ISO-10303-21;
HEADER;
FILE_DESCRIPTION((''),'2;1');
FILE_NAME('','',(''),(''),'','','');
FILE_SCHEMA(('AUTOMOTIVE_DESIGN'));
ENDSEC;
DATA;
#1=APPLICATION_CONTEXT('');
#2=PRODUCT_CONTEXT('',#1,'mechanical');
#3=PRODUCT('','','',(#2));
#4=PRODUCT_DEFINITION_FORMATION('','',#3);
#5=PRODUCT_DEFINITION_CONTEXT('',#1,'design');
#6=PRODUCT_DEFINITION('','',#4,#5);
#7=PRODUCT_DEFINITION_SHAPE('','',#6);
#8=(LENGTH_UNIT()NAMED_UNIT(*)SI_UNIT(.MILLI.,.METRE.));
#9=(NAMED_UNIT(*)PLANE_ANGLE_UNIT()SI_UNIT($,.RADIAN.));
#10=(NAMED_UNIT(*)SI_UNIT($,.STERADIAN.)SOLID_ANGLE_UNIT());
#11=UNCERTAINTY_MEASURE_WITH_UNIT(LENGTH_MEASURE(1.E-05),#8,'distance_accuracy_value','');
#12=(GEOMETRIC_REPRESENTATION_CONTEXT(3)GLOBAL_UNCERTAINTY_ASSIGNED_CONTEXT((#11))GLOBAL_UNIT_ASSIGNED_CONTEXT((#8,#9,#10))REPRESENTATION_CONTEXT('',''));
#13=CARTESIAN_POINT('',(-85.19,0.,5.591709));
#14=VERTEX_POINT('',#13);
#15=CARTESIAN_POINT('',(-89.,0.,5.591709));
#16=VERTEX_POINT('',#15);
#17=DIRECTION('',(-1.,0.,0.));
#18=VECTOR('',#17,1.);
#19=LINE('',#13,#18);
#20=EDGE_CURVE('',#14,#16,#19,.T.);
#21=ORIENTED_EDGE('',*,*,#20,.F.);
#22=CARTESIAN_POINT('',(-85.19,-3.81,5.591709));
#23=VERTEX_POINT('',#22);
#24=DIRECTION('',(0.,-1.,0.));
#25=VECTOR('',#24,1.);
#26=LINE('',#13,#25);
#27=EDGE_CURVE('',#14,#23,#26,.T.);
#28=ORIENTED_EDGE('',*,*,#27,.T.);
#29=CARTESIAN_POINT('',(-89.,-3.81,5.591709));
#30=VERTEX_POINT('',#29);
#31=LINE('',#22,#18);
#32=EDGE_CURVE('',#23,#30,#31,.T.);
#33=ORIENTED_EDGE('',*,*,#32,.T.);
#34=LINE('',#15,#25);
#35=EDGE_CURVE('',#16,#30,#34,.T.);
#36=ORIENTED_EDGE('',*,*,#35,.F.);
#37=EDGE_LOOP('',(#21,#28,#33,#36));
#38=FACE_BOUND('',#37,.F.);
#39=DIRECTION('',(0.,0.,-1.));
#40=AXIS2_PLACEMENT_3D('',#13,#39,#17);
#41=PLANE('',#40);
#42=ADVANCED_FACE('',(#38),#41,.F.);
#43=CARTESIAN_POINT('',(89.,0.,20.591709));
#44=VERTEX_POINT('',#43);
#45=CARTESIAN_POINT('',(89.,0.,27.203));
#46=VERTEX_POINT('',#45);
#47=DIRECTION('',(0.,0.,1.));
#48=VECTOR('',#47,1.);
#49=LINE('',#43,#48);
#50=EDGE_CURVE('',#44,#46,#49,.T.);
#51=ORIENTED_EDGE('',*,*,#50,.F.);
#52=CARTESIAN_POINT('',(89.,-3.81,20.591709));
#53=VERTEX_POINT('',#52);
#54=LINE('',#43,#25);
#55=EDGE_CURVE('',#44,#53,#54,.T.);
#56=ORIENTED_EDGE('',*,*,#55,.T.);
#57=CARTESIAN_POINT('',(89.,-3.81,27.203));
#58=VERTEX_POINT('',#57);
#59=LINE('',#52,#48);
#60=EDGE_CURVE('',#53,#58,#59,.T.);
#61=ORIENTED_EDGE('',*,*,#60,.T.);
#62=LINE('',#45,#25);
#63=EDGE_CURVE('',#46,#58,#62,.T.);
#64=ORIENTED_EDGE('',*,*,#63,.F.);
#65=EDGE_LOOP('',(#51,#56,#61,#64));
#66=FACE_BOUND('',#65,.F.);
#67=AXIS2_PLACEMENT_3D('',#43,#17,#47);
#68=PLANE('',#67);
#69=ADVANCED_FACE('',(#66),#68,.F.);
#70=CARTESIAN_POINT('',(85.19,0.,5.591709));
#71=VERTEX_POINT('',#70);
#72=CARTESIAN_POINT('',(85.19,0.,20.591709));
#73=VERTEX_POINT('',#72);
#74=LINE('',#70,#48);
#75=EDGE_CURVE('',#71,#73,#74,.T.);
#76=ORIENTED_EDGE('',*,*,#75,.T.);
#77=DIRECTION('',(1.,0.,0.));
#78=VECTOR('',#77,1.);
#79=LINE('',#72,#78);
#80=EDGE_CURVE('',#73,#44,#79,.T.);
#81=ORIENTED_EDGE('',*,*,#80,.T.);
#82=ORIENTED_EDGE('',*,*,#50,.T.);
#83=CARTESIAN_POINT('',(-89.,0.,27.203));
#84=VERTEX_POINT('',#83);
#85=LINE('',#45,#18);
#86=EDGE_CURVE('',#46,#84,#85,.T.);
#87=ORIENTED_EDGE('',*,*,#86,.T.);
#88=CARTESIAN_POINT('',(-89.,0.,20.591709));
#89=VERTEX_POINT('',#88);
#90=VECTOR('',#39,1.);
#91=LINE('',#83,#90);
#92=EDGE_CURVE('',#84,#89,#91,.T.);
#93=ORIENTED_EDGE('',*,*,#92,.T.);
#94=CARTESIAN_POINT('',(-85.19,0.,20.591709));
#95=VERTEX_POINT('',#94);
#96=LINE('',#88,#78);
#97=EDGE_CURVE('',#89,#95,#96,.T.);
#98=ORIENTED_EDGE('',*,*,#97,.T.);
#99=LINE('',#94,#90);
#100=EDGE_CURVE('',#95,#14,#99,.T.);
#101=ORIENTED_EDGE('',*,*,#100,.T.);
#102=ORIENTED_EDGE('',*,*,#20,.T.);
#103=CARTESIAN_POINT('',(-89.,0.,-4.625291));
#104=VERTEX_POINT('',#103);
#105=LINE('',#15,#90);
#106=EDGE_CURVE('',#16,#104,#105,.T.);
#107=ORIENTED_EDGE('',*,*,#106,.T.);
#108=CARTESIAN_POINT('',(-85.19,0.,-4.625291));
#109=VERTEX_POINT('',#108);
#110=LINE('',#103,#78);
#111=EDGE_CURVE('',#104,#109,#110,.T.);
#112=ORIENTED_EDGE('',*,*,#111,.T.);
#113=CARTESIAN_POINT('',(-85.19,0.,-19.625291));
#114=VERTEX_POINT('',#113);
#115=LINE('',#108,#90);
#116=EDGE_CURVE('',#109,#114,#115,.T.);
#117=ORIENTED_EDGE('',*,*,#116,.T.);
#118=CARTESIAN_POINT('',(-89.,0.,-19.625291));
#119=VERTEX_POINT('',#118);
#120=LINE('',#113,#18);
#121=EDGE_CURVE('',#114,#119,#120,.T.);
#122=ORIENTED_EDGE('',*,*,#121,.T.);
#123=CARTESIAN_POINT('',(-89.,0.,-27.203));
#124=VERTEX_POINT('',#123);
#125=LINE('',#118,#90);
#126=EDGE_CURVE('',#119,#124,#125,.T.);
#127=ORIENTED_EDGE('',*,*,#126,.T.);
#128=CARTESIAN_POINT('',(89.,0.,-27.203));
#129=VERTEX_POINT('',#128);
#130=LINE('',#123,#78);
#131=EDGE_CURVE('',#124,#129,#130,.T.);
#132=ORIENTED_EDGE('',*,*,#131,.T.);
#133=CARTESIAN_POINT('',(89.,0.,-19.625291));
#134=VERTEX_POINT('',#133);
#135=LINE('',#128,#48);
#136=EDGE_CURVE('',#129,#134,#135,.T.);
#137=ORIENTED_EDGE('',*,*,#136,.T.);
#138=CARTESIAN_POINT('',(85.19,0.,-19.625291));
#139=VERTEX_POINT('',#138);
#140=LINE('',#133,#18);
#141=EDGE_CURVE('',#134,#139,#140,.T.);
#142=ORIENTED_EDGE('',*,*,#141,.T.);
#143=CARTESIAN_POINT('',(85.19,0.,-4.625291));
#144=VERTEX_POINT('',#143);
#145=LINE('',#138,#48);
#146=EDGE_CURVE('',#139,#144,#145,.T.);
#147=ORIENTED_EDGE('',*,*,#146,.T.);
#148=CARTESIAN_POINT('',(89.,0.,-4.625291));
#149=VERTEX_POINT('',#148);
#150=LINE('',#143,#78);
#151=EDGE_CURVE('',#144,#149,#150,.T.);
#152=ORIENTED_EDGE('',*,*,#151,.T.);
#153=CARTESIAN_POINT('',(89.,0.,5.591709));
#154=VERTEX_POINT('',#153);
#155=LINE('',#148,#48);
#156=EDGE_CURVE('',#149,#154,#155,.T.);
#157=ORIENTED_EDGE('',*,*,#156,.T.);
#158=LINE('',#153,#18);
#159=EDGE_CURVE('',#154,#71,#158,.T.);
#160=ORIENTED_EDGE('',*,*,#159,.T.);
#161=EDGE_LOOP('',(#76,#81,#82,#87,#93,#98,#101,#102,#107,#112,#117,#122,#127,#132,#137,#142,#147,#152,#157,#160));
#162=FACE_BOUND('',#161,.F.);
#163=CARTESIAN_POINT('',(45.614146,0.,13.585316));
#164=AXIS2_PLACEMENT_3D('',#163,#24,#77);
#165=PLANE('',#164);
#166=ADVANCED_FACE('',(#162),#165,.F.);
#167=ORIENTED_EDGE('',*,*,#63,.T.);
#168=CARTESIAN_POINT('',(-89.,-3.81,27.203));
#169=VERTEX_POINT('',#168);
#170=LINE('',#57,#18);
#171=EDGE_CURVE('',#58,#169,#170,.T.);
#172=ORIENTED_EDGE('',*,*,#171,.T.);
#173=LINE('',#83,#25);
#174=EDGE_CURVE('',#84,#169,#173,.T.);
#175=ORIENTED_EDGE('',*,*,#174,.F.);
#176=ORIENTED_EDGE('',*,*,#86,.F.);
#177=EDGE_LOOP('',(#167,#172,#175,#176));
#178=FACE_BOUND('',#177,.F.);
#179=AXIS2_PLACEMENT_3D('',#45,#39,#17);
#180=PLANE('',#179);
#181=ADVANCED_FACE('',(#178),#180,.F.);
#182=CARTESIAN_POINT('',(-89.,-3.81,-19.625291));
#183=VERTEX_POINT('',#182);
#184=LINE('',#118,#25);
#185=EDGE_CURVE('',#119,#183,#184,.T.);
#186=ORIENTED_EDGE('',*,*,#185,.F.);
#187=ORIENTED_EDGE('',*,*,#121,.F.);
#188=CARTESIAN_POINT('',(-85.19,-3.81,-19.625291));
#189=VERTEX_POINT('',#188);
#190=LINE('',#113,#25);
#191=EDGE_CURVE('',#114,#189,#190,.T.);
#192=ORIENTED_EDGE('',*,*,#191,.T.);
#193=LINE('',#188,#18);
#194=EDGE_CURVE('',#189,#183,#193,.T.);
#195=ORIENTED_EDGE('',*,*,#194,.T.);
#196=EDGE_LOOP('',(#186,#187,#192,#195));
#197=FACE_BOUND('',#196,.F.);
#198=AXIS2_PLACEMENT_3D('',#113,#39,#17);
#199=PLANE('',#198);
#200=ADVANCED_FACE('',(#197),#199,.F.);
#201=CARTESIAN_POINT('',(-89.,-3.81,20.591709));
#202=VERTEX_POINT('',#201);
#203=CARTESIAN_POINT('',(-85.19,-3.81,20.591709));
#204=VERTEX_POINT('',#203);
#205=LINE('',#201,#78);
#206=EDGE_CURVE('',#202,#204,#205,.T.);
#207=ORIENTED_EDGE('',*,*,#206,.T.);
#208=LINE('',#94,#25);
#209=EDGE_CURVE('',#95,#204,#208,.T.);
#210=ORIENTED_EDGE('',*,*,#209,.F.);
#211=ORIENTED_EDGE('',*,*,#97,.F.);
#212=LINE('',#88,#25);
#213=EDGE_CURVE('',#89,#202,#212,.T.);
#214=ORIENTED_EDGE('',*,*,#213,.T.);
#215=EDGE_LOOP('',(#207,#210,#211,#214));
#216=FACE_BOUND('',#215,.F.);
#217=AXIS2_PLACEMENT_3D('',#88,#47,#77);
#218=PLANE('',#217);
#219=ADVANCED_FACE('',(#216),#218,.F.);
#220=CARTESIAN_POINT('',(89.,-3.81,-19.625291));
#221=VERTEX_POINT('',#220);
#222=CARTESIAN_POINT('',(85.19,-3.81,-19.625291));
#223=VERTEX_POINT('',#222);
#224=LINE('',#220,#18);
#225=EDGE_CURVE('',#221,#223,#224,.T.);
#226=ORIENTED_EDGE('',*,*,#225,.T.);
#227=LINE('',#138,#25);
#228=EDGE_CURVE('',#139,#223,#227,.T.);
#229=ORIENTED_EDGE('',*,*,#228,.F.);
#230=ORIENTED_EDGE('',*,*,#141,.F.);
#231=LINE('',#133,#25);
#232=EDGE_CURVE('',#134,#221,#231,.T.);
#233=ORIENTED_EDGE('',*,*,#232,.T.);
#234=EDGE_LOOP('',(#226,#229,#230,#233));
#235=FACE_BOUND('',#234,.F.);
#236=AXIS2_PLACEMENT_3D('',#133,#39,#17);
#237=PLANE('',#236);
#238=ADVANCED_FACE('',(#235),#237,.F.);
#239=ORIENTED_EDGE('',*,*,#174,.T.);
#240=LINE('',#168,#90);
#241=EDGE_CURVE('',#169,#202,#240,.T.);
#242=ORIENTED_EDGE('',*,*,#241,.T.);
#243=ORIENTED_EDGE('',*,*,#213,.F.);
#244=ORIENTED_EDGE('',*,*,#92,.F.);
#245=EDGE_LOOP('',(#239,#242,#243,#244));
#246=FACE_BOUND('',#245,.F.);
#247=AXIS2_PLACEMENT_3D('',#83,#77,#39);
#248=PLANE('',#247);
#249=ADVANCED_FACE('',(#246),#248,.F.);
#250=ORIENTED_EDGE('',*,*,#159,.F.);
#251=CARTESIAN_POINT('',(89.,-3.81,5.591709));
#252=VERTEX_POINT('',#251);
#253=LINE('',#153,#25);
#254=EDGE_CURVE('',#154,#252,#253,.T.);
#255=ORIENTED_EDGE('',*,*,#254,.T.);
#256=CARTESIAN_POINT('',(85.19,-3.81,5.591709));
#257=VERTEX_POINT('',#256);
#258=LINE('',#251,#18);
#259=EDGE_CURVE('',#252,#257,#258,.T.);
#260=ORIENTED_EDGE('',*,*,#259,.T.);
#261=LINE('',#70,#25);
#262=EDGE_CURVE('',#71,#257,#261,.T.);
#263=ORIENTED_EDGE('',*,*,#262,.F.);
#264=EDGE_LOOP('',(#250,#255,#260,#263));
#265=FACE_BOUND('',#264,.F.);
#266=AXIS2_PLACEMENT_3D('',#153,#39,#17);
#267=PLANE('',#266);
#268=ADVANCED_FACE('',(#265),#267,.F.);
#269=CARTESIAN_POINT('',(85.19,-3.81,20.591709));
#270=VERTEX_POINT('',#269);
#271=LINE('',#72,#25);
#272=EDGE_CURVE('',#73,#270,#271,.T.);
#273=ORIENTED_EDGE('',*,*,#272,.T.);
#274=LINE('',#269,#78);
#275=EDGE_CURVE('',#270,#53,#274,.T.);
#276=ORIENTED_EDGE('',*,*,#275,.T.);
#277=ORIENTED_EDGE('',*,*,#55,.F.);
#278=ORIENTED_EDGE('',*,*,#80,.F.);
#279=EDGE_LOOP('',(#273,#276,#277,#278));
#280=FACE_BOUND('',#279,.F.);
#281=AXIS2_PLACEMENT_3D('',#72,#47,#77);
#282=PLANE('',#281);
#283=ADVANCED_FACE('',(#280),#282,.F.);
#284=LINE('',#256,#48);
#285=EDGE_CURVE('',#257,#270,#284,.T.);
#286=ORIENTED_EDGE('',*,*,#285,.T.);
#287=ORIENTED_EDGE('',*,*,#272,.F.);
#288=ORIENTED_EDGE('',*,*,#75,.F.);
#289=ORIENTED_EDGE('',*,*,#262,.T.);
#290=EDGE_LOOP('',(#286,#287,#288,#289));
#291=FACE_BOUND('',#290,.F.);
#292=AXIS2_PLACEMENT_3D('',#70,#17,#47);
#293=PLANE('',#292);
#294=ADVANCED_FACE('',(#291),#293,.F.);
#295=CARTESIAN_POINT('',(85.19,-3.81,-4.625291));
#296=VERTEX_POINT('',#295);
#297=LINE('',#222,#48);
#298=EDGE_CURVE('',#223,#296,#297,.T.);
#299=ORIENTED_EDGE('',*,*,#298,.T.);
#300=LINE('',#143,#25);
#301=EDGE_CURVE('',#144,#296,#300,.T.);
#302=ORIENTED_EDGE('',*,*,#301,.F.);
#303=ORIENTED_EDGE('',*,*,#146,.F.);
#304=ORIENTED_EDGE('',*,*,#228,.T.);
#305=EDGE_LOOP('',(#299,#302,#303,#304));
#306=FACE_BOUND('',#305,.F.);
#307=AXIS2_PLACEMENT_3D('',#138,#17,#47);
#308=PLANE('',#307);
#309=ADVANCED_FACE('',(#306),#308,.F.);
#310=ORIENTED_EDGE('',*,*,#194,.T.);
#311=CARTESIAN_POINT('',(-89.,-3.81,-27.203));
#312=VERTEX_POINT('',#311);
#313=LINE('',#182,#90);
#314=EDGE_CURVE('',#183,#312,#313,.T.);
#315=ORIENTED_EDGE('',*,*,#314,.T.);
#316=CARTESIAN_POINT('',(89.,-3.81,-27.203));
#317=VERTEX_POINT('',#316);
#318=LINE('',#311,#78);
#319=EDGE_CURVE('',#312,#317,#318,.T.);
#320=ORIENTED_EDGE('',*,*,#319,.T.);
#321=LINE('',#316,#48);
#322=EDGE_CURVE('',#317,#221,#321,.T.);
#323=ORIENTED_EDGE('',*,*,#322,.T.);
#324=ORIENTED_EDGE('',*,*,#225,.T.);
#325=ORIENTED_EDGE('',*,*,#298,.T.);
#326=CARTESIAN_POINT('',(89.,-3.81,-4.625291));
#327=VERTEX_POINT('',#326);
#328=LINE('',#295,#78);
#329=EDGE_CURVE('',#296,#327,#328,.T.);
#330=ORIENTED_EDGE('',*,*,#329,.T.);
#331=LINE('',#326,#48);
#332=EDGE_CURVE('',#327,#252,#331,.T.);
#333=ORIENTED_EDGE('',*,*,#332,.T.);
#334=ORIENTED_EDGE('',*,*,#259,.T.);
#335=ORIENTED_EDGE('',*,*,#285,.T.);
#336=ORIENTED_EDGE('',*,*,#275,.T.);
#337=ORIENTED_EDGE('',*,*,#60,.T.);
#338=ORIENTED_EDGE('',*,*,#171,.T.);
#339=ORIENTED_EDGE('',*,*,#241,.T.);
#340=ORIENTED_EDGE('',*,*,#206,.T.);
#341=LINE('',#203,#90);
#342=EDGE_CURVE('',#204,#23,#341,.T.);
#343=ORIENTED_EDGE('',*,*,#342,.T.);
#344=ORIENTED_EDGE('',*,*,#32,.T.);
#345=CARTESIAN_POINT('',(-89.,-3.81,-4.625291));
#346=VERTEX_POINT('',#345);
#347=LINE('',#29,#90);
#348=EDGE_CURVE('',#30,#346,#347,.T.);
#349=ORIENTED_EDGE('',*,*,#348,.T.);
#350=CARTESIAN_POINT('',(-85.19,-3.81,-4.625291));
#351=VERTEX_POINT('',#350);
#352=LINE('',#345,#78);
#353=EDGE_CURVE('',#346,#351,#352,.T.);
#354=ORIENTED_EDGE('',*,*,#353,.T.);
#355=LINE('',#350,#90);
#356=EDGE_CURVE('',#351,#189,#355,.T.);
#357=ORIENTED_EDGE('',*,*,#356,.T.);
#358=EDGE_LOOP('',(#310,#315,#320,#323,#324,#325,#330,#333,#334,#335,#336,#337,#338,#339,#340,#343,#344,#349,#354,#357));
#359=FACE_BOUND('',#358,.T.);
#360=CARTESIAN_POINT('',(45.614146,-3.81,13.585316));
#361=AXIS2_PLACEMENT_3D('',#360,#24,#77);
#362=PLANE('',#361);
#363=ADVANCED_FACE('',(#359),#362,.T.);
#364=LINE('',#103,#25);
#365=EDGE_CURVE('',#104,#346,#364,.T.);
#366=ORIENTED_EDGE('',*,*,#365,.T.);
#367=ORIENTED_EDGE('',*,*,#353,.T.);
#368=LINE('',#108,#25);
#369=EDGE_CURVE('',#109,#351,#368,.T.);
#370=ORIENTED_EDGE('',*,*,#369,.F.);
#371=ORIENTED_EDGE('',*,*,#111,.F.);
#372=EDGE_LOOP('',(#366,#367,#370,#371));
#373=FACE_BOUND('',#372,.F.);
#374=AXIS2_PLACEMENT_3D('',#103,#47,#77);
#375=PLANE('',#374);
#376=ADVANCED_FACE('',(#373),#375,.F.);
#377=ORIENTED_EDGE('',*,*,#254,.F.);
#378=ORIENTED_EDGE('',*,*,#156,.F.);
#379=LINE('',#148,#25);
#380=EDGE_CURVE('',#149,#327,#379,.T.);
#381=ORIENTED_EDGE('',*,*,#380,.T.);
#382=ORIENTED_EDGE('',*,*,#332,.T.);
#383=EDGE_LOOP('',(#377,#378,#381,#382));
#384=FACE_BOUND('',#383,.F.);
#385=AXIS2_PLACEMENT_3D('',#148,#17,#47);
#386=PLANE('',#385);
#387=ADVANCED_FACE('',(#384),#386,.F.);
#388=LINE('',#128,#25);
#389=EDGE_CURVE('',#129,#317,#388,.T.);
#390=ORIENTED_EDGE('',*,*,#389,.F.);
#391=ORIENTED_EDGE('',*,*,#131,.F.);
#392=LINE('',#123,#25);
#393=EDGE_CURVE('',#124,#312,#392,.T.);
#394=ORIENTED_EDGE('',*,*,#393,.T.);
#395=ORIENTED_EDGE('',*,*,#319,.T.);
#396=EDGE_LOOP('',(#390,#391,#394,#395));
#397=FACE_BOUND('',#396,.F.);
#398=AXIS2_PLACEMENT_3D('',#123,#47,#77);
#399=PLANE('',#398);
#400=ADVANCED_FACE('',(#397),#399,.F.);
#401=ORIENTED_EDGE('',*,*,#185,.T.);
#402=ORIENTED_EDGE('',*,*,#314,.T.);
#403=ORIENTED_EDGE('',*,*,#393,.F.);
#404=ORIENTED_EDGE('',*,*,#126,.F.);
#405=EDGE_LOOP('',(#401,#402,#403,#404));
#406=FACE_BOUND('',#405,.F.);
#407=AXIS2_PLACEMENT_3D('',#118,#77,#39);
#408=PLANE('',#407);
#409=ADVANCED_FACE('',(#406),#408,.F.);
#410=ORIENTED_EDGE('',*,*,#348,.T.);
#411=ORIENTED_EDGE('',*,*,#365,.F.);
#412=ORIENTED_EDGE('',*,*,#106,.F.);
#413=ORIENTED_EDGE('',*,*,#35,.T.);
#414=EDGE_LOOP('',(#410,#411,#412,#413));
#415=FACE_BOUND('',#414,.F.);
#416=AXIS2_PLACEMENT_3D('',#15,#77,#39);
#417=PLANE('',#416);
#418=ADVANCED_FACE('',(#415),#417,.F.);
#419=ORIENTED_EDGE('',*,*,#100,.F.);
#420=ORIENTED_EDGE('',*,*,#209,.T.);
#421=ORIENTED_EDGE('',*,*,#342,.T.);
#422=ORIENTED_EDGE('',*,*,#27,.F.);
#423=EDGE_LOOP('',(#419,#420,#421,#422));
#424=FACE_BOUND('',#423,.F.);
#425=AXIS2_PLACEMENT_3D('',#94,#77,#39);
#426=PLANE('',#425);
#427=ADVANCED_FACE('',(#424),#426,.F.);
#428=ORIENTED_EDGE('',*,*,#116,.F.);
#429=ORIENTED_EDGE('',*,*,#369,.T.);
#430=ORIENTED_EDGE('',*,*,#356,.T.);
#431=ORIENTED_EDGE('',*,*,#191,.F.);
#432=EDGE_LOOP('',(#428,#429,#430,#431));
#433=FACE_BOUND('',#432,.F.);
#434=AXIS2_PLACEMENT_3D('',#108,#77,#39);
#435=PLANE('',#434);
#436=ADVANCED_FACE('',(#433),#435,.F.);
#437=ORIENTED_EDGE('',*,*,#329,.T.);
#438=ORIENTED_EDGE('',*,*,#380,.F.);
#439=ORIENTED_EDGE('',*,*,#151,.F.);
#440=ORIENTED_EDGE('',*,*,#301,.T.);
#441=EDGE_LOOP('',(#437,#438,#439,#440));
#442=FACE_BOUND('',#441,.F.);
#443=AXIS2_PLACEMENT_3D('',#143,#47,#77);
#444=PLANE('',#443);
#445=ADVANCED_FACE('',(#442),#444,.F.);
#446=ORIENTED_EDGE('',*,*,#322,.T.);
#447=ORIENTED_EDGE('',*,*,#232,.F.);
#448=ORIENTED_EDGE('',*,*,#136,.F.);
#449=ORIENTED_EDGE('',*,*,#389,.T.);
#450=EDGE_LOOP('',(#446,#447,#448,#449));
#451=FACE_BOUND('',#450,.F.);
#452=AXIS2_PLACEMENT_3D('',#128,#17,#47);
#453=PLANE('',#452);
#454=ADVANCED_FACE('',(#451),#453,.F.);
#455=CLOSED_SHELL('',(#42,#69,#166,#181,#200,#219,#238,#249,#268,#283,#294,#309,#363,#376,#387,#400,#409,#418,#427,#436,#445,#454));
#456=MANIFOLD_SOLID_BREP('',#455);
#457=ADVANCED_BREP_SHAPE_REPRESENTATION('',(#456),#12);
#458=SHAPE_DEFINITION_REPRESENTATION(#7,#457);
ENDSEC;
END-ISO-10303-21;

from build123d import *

# Parameters (mm, degrees)
F1_DEPTH = 3.81


# Not quite as in the source:
# - a feature names something its author has since deleted; it is built from what else it names


with BuildPart() as f1:
    # F0 (on Front) → F1 (new body)
    with BuildSketch(Plane.XZ):
        Polygon((89, 20.5917087717), (89, 27.203), (82.18, 27.203), (64, 27.203), (54, 27.203), (39, 27.203), (0, 27.203), (0, 0), (89, 0), (89, 5.5917087717), (85.19, 5.5917087717), (85.19, 20.5917087717), align=None)
        Polygon((-89, 0), (0, 0), (0, 27.203), (-39, 27.203), (-54, 27.203), (-64, 27.203), (-82.18, 27.203), (-89, 27.203), (-89, 20.5917087717), (-85.19, 20.5917087717), (-85.19, 5.5917087717), (-89, 5.5917087717), align=None)
        Polygon((0, -27.203), (0, 0), (-89, 0), (-89, -4.6252912283), (-85.19, -4.6252912283), (-85.19, -19.6252912283), (-89, -19.6252912283), (-89, -27.203), (-82.18, -27.203), (-64, -27.203), (-54, -27.203), (-39, -27.203), align=None)
        Polygon((89, -4.6252912283), (89, 0), (0, 0), (0, -27.203), (39, -27.203), (54, -27.203), (64, -27.203), (82.18, -27.203), (89, -27.203), (89, -19.6252912283), (85.19, -19.6252912283), (85.19, -4.6252912283), align=None)
    extrude(amount=F1_DEPTH)


solid = f1.part
